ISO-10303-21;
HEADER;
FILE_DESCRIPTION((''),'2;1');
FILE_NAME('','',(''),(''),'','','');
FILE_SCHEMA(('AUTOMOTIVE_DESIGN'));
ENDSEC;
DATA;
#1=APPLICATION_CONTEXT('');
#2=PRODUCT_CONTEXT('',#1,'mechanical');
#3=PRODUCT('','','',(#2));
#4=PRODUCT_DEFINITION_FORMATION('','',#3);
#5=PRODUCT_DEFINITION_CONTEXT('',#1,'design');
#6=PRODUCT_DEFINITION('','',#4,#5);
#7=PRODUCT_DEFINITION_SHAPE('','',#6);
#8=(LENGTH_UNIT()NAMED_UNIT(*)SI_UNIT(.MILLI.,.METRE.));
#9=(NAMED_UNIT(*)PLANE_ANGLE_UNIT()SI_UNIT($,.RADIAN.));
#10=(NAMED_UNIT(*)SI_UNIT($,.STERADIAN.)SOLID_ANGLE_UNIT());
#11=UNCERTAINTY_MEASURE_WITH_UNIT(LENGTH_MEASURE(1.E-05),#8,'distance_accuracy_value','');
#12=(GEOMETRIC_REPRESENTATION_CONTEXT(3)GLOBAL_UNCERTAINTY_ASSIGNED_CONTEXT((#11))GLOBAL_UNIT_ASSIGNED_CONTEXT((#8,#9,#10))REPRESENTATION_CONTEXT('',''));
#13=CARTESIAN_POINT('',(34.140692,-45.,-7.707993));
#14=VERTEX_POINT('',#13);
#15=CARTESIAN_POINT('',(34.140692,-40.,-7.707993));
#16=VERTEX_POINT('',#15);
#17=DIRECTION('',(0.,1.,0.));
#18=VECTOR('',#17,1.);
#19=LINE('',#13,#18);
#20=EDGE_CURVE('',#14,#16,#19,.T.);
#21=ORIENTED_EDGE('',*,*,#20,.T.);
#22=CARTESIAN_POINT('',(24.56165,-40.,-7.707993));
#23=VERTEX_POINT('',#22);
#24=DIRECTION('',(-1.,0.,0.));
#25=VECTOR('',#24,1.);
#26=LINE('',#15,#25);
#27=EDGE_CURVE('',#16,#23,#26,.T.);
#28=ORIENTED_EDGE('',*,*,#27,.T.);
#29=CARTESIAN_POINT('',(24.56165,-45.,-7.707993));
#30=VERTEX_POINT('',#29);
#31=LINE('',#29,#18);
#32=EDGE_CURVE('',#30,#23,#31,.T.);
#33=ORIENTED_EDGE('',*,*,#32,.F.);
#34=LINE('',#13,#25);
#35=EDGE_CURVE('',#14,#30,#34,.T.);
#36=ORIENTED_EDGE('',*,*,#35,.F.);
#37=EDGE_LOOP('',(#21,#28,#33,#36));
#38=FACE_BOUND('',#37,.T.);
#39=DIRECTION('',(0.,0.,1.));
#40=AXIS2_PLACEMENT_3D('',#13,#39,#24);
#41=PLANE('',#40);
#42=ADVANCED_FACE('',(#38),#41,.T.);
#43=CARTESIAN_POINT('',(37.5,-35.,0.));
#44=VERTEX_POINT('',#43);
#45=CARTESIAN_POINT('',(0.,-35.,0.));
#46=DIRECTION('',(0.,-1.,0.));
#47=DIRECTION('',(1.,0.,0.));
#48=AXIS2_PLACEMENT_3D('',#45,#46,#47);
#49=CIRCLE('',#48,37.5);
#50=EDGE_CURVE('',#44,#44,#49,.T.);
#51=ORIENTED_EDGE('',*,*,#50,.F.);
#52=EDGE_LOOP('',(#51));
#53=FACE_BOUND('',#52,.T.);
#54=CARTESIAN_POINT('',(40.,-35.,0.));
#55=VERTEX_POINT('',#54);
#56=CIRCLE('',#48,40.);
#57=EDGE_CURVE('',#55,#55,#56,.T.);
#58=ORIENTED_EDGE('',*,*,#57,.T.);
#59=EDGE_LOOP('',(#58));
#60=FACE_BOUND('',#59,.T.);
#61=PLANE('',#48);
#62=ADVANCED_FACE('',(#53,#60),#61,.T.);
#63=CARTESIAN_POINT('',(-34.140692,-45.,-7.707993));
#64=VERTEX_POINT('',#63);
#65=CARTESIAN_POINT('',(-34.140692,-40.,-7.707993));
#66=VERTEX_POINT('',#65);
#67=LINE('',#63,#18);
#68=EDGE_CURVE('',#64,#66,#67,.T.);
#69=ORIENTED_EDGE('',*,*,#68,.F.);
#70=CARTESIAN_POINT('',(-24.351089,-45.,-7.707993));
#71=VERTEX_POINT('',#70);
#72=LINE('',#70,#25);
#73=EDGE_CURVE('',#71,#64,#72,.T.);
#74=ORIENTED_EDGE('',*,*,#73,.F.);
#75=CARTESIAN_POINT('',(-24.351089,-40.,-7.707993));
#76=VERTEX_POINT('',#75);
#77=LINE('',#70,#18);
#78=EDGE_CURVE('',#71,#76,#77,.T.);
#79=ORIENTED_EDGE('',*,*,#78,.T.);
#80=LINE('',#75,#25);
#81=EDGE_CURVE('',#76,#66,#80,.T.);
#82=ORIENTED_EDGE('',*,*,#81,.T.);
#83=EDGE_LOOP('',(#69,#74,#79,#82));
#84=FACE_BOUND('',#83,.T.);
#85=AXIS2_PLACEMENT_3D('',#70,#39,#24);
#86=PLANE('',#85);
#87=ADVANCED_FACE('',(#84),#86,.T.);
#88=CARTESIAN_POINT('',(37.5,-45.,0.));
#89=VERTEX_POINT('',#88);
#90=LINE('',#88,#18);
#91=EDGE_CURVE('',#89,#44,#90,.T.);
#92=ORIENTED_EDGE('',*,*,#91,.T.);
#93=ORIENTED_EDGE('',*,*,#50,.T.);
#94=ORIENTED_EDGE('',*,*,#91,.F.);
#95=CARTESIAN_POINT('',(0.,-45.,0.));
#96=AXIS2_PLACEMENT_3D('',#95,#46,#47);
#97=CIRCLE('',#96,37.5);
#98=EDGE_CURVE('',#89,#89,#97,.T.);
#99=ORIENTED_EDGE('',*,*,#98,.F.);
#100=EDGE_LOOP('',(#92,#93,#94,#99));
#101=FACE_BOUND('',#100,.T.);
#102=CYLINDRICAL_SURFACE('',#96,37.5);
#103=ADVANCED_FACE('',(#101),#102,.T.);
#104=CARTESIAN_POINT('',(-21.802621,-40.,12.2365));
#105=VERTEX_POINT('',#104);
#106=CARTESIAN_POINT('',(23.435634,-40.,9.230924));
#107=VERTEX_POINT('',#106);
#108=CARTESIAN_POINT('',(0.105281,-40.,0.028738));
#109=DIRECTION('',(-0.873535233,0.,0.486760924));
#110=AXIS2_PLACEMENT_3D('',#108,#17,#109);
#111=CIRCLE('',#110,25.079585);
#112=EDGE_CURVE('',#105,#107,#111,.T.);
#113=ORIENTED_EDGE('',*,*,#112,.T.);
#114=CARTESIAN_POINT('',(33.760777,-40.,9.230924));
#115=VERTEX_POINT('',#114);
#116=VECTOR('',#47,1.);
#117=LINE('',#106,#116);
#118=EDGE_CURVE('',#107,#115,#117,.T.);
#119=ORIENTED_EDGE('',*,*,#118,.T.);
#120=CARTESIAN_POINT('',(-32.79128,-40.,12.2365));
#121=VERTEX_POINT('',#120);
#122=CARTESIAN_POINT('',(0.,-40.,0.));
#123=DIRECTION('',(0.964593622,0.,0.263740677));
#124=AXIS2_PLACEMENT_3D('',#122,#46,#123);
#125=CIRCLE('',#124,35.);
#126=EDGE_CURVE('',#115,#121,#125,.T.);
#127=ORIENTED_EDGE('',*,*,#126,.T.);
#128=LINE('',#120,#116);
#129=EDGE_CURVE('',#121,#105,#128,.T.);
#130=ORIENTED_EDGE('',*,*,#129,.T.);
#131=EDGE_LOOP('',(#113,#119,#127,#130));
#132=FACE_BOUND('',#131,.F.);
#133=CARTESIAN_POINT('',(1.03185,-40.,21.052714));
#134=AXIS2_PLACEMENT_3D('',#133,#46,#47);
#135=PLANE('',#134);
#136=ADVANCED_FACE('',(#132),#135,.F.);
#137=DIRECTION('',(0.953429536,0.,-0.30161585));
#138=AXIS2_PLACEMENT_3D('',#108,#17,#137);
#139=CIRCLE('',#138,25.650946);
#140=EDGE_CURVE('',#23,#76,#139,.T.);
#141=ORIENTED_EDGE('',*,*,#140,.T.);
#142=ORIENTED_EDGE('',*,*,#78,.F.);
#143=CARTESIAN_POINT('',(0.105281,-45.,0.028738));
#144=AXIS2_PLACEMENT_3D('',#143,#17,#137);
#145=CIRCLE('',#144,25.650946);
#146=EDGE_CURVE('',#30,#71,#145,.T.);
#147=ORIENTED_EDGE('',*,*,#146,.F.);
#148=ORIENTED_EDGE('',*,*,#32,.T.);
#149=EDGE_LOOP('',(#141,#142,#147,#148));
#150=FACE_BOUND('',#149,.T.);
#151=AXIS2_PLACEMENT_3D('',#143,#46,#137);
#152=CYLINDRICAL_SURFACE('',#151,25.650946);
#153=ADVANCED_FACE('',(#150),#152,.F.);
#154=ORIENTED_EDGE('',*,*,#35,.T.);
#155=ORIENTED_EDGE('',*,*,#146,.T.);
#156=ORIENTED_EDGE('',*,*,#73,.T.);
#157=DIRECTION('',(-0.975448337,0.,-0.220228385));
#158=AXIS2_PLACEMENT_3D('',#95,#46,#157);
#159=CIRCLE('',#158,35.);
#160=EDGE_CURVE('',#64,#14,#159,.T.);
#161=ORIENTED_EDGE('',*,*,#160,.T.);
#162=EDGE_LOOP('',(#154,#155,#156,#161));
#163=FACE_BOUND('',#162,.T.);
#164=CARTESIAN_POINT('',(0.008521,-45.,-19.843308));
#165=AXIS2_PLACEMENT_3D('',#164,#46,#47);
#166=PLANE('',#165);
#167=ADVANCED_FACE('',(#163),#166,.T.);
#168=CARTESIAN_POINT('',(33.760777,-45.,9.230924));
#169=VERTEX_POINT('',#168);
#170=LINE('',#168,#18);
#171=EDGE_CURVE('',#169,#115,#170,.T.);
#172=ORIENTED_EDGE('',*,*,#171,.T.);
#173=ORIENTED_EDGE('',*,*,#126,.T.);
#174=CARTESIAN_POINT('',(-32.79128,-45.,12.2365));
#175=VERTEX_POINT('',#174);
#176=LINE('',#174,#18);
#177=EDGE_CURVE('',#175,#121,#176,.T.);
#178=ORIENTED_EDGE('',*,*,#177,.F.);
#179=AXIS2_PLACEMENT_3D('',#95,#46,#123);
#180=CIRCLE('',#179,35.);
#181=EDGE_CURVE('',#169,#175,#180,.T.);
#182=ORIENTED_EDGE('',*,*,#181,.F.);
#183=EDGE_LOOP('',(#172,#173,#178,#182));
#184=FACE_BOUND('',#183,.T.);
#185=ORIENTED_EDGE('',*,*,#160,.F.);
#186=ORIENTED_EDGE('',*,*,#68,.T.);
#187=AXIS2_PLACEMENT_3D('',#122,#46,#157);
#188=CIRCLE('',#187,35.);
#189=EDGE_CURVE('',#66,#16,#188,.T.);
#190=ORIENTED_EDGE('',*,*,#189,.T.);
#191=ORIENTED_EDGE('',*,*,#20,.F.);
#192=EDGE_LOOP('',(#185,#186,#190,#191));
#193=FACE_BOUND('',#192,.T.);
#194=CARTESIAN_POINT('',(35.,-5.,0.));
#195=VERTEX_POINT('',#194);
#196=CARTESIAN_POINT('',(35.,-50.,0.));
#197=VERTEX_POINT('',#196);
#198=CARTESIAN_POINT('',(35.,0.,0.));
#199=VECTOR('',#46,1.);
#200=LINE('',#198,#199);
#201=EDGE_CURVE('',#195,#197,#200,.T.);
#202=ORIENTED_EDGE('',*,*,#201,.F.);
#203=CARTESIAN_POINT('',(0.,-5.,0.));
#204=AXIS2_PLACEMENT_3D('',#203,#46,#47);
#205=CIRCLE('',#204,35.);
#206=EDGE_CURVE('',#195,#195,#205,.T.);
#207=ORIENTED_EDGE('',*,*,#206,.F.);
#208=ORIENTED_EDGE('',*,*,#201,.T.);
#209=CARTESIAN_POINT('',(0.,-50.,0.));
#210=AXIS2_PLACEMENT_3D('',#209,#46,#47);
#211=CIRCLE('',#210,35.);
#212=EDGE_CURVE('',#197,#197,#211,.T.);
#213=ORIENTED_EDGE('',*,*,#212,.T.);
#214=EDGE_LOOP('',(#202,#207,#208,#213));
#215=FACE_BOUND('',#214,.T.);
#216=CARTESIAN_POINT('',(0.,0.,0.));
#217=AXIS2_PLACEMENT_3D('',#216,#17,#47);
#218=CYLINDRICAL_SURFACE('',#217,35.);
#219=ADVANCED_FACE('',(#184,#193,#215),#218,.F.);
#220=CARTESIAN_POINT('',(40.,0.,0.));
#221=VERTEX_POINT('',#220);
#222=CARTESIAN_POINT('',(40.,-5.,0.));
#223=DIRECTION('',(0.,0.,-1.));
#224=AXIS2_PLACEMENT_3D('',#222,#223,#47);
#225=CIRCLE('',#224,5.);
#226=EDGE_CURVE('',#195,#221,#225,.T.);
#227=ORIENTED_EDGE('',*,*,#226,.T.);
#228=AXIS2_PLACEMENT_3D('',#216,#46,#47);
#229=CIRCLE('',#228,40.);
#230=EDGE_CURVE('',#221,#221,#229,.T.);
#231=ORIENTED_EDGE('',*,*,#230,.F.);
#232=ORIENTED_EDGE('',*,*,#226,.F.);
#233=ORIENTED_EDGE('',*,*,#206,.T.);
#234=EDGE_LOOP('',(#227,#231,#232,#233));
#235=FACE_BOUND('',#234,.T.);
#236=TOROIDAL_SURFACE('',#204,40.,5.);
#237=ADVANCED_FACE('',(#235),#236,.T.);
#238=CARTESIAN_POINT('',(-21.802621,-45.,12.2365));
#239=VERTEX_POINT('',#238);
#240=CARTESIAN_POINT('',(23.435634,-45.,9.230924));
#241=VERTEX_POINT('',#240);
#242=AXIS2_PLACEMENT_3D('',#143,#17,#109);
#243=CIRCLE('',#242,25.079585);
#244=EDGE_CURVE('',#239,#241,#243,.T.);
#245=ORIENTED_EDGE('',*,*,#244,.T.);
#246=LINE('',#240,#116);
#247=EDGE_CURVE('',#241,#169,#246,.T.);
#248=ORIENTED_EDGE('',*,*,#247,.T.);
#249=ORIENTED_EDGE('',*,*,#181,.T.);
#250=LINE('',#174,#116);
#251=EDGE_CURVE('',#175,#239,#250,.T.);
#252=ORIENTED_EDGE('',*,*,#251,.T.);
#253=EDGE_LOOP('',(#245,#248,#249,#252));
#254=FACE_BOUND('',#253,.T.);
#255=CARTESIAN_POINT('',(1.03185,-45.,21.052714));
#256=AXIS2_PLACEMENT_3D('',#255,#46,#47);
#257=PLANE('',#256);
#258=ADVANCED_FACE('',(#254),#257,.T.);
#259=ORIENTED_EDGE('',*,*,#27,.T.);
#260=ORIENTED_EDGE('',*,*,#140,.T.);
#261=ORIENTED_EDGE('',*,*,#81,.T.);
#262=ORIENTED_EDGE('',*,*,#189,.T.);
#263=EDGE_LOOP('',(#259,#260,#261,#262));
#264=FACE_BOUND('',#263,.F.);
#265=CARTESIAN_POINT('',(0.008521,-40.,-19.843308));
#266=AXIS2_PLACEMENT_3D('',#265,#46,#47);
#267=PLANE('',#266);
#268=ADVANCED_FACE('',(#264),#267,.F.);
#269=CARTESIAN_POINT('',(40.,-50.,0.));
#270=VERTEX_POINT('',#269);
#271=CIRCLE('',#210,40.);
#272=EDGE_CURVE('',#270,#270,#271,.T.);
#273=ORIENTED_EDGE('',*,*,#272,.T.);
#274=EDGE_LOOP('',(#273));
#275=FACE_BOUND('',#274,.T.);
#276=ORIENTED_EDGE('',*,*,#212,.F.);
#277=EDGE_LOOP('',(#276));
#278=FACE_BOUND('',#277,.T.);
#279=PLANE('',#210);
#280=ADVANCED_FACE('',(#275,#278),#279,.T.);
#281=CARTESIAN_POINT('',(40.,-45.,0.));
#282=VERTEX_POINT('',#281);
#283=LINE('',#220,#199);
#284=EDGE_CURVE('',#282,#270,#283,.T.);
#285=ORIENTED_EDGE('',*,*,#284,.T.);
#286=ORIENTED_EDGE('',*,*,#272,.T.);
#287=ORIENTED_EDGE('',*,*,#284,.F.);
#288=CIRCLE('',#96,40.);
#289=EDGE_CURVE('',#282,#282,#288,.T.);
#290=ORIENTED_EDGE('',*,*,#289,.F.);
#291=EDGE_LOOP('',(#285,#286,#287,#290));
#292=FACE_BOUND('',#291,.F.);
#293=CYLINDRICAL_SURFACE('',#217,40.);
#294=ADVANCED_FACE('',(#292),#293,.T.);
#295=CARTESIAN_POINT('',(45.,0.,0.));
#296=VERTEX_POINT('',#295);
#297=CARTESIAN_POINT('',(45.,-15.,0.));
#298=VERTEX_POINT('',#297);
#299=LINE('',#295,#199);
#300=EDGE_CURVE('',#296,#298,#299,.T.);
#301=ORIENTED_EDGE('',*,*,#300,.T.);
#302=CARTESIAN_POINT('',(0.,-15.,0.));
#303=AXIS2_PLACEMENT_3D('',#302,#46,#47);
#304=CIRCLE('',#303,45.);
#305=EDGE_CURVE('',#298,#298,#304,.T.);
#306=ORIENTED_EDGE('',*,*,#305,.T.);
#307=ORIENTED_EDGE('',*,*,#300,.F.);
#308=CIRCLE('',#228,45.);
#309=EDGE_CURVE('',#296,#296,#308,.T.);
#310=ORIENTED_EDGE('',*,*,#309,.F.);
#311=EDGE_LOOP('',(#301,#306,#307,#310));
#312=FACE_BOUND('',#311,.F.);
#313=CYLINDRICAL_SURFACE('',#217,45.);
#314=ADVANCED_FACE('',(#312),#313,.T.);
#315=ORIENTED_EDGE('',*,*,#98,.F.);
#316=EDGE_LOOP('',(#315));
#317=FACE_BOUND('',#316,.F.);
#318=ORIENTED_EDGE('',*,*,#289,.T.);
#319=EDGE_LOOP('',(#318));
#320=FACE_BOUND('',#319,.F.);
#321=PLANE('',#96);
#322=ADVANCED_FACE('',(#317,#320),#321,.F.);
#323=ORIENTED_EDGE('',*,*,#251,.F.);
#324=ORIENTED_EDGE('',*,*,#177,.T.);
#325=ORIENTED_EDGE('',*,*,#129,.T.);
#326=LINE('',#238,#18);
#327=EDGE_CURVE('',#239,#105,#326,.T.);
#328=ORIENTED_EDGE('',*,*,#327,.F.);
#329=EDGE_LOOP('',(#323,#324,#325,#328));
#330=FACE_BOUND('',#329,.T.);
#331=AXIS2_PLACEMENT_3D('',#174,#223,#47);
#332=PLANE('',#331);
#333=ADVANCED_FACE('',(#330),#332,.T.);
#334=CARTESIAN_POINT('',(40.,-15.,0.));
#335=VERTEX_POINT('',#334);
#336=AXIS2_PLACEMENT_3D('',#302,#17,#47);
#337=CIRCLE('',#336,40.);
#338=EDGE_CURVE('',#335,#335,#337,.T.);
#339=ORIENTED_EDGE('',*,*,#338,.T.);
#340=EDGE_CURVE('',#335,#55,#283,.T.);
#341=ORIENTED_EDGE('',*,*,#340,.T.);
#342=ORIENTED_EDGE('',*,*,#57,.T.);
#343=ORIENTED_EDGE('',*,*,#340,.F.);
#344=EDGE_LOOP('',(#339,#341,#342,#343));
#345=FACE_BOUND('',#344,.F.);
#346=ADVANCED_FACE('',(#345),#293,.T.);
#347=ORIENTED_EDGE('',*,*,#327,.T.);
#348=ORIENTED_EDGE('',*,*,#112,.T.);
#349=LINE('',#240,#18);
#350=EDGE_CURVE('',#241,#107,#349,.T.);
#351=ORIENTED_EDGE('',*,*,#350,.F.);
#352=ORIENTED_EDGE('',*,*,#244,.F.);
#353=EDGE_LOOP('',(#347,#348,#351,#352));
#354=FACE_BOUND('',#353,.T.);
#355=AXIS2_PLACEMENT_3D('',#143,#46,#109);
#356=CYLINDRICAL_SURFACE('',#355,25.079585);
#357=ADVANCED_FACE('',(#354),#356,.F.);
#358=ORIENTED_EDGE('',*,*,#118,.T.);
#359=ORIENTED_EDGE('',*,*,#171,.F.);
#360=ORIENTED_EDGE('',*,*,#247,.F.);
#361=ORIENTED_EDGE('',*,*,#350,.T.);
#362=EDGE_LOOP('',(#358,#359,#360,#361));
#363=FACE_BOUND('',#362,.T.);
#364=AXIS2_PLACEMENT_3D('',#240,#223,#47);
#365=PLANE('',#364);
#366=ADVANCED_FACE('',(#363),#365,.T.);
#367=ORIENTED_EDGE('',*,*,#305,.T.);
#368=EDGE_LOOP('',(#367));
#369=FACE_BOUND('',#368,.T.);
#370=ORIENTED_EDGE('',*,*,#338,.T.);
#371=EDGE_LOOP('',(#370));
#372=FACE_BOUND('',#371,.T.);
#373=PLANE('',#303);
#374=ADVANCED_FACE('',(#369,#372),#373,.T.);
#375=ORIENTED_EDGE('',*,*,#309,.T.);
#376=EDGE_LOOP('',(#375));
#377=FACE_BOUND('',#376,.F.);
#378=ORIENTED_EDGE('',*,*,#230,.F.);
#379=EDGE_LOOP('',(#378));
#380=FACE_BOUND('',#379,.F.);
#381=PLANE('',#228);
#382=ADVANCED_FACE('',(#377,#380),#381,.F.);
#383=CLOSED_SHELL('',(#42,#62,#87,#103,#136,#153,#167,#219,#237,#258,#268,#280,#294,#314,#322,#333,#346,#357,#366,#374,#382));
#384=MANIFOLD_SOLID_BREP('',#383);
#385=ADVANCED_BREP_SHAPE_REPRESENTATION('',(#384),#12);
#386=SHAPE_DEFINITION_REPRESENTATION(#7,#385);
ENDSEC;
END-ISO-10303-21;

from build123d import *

# Parameters (mm, degrees)
F0_R      = 40
F0_R_2    = 35
F1_DEPTH  = 50
F2_R      = 45
F2_R_2    = 35
F3_DEPTH  = 15
F4_R      = 5
F6_R      = 40
F6_R_2    = 37.5
F7_DEPTH  = 10
F9_DEPTH  = 5
F11_DEPTH = 5


with BuildPart() as f1:
    # F0 (on Front) → F1 (new body)
    with BuildSketch(Plane.XZ):
        Circle(F0_R)
        Circle(F0_R_2, mode=Mode.SUBTRACT)
    extrude(amount=F1_DEPTH)

    # F2 (on Front) → F3 (join)
    with BuildSketch(Plane.XZ):
        Circle(F2_R)
        Circle(F2_R_2, mode=Mode.SUBTRACT)
    extrude(amount=F3_DEPTH)

    # F4
    f4_edges = [f1.edges().sort_by_distance(p)[0] for p in [
        (-35, 0, 0),
    ]]
    fillet(f4_edges, radius=F4_R)

    # F6 (on offset) → F7 (cut)
    with BuildSketch(Plane.XZ.offset(45)):
        Circle(F6_R)
        Circle(F6_R_2, mode=Mode.SUBTRACT)
    extrude(amount=-F7_DEPTH, mode=Mode.SUBTRACT)

    # F8 (on offset) → F9 (join)
    with BuildSketch(Plane.XZ.offset(45)):
        with BuildLine():
            Line((23.4356336296, 9.2309236786), (33.7607767689, 9.2309236786))
            ThreePointArc((33.7607767689, 9.2309236786), (1.5790357434, 34.9643625156), (-32.7912801838, 12.2365004764))
            Line((-32.7912801838, 12.2365004764), (-21.8026206791, 12.2365004764))
            ThreePointArc((-21.8026206791, 12.2365004764), (1.7678734782, 25.0531540072), (23.4356336296, 9.2309236786))
        make_face()
    extrude(amount=-F9_DEPTH)

    # F10 (on offset) → F11 (join)
    with BuildSketch(Plane.XZ.offset(45)):
        with BuildLine():
            Line((-24.3510891636, -7.7079934607), (-34.1406918033, -7.7079934607))
            ThreePointArc((-34.1406918033, -7.7079934607), (0, -35), (34.1406918033, -7.7079934607))
            Line((34.1406918033, -7.7079934607), (24.5616502176, -7.7079934607))
            ThreePointArc((24.5616502176, -7.7079934607), (0.105280527, -25.6222077044), (-24.3510891636, -7.7079934607))
        make_face()
    extrude(amount=-F11_DEPTH)


solid = f1.part
